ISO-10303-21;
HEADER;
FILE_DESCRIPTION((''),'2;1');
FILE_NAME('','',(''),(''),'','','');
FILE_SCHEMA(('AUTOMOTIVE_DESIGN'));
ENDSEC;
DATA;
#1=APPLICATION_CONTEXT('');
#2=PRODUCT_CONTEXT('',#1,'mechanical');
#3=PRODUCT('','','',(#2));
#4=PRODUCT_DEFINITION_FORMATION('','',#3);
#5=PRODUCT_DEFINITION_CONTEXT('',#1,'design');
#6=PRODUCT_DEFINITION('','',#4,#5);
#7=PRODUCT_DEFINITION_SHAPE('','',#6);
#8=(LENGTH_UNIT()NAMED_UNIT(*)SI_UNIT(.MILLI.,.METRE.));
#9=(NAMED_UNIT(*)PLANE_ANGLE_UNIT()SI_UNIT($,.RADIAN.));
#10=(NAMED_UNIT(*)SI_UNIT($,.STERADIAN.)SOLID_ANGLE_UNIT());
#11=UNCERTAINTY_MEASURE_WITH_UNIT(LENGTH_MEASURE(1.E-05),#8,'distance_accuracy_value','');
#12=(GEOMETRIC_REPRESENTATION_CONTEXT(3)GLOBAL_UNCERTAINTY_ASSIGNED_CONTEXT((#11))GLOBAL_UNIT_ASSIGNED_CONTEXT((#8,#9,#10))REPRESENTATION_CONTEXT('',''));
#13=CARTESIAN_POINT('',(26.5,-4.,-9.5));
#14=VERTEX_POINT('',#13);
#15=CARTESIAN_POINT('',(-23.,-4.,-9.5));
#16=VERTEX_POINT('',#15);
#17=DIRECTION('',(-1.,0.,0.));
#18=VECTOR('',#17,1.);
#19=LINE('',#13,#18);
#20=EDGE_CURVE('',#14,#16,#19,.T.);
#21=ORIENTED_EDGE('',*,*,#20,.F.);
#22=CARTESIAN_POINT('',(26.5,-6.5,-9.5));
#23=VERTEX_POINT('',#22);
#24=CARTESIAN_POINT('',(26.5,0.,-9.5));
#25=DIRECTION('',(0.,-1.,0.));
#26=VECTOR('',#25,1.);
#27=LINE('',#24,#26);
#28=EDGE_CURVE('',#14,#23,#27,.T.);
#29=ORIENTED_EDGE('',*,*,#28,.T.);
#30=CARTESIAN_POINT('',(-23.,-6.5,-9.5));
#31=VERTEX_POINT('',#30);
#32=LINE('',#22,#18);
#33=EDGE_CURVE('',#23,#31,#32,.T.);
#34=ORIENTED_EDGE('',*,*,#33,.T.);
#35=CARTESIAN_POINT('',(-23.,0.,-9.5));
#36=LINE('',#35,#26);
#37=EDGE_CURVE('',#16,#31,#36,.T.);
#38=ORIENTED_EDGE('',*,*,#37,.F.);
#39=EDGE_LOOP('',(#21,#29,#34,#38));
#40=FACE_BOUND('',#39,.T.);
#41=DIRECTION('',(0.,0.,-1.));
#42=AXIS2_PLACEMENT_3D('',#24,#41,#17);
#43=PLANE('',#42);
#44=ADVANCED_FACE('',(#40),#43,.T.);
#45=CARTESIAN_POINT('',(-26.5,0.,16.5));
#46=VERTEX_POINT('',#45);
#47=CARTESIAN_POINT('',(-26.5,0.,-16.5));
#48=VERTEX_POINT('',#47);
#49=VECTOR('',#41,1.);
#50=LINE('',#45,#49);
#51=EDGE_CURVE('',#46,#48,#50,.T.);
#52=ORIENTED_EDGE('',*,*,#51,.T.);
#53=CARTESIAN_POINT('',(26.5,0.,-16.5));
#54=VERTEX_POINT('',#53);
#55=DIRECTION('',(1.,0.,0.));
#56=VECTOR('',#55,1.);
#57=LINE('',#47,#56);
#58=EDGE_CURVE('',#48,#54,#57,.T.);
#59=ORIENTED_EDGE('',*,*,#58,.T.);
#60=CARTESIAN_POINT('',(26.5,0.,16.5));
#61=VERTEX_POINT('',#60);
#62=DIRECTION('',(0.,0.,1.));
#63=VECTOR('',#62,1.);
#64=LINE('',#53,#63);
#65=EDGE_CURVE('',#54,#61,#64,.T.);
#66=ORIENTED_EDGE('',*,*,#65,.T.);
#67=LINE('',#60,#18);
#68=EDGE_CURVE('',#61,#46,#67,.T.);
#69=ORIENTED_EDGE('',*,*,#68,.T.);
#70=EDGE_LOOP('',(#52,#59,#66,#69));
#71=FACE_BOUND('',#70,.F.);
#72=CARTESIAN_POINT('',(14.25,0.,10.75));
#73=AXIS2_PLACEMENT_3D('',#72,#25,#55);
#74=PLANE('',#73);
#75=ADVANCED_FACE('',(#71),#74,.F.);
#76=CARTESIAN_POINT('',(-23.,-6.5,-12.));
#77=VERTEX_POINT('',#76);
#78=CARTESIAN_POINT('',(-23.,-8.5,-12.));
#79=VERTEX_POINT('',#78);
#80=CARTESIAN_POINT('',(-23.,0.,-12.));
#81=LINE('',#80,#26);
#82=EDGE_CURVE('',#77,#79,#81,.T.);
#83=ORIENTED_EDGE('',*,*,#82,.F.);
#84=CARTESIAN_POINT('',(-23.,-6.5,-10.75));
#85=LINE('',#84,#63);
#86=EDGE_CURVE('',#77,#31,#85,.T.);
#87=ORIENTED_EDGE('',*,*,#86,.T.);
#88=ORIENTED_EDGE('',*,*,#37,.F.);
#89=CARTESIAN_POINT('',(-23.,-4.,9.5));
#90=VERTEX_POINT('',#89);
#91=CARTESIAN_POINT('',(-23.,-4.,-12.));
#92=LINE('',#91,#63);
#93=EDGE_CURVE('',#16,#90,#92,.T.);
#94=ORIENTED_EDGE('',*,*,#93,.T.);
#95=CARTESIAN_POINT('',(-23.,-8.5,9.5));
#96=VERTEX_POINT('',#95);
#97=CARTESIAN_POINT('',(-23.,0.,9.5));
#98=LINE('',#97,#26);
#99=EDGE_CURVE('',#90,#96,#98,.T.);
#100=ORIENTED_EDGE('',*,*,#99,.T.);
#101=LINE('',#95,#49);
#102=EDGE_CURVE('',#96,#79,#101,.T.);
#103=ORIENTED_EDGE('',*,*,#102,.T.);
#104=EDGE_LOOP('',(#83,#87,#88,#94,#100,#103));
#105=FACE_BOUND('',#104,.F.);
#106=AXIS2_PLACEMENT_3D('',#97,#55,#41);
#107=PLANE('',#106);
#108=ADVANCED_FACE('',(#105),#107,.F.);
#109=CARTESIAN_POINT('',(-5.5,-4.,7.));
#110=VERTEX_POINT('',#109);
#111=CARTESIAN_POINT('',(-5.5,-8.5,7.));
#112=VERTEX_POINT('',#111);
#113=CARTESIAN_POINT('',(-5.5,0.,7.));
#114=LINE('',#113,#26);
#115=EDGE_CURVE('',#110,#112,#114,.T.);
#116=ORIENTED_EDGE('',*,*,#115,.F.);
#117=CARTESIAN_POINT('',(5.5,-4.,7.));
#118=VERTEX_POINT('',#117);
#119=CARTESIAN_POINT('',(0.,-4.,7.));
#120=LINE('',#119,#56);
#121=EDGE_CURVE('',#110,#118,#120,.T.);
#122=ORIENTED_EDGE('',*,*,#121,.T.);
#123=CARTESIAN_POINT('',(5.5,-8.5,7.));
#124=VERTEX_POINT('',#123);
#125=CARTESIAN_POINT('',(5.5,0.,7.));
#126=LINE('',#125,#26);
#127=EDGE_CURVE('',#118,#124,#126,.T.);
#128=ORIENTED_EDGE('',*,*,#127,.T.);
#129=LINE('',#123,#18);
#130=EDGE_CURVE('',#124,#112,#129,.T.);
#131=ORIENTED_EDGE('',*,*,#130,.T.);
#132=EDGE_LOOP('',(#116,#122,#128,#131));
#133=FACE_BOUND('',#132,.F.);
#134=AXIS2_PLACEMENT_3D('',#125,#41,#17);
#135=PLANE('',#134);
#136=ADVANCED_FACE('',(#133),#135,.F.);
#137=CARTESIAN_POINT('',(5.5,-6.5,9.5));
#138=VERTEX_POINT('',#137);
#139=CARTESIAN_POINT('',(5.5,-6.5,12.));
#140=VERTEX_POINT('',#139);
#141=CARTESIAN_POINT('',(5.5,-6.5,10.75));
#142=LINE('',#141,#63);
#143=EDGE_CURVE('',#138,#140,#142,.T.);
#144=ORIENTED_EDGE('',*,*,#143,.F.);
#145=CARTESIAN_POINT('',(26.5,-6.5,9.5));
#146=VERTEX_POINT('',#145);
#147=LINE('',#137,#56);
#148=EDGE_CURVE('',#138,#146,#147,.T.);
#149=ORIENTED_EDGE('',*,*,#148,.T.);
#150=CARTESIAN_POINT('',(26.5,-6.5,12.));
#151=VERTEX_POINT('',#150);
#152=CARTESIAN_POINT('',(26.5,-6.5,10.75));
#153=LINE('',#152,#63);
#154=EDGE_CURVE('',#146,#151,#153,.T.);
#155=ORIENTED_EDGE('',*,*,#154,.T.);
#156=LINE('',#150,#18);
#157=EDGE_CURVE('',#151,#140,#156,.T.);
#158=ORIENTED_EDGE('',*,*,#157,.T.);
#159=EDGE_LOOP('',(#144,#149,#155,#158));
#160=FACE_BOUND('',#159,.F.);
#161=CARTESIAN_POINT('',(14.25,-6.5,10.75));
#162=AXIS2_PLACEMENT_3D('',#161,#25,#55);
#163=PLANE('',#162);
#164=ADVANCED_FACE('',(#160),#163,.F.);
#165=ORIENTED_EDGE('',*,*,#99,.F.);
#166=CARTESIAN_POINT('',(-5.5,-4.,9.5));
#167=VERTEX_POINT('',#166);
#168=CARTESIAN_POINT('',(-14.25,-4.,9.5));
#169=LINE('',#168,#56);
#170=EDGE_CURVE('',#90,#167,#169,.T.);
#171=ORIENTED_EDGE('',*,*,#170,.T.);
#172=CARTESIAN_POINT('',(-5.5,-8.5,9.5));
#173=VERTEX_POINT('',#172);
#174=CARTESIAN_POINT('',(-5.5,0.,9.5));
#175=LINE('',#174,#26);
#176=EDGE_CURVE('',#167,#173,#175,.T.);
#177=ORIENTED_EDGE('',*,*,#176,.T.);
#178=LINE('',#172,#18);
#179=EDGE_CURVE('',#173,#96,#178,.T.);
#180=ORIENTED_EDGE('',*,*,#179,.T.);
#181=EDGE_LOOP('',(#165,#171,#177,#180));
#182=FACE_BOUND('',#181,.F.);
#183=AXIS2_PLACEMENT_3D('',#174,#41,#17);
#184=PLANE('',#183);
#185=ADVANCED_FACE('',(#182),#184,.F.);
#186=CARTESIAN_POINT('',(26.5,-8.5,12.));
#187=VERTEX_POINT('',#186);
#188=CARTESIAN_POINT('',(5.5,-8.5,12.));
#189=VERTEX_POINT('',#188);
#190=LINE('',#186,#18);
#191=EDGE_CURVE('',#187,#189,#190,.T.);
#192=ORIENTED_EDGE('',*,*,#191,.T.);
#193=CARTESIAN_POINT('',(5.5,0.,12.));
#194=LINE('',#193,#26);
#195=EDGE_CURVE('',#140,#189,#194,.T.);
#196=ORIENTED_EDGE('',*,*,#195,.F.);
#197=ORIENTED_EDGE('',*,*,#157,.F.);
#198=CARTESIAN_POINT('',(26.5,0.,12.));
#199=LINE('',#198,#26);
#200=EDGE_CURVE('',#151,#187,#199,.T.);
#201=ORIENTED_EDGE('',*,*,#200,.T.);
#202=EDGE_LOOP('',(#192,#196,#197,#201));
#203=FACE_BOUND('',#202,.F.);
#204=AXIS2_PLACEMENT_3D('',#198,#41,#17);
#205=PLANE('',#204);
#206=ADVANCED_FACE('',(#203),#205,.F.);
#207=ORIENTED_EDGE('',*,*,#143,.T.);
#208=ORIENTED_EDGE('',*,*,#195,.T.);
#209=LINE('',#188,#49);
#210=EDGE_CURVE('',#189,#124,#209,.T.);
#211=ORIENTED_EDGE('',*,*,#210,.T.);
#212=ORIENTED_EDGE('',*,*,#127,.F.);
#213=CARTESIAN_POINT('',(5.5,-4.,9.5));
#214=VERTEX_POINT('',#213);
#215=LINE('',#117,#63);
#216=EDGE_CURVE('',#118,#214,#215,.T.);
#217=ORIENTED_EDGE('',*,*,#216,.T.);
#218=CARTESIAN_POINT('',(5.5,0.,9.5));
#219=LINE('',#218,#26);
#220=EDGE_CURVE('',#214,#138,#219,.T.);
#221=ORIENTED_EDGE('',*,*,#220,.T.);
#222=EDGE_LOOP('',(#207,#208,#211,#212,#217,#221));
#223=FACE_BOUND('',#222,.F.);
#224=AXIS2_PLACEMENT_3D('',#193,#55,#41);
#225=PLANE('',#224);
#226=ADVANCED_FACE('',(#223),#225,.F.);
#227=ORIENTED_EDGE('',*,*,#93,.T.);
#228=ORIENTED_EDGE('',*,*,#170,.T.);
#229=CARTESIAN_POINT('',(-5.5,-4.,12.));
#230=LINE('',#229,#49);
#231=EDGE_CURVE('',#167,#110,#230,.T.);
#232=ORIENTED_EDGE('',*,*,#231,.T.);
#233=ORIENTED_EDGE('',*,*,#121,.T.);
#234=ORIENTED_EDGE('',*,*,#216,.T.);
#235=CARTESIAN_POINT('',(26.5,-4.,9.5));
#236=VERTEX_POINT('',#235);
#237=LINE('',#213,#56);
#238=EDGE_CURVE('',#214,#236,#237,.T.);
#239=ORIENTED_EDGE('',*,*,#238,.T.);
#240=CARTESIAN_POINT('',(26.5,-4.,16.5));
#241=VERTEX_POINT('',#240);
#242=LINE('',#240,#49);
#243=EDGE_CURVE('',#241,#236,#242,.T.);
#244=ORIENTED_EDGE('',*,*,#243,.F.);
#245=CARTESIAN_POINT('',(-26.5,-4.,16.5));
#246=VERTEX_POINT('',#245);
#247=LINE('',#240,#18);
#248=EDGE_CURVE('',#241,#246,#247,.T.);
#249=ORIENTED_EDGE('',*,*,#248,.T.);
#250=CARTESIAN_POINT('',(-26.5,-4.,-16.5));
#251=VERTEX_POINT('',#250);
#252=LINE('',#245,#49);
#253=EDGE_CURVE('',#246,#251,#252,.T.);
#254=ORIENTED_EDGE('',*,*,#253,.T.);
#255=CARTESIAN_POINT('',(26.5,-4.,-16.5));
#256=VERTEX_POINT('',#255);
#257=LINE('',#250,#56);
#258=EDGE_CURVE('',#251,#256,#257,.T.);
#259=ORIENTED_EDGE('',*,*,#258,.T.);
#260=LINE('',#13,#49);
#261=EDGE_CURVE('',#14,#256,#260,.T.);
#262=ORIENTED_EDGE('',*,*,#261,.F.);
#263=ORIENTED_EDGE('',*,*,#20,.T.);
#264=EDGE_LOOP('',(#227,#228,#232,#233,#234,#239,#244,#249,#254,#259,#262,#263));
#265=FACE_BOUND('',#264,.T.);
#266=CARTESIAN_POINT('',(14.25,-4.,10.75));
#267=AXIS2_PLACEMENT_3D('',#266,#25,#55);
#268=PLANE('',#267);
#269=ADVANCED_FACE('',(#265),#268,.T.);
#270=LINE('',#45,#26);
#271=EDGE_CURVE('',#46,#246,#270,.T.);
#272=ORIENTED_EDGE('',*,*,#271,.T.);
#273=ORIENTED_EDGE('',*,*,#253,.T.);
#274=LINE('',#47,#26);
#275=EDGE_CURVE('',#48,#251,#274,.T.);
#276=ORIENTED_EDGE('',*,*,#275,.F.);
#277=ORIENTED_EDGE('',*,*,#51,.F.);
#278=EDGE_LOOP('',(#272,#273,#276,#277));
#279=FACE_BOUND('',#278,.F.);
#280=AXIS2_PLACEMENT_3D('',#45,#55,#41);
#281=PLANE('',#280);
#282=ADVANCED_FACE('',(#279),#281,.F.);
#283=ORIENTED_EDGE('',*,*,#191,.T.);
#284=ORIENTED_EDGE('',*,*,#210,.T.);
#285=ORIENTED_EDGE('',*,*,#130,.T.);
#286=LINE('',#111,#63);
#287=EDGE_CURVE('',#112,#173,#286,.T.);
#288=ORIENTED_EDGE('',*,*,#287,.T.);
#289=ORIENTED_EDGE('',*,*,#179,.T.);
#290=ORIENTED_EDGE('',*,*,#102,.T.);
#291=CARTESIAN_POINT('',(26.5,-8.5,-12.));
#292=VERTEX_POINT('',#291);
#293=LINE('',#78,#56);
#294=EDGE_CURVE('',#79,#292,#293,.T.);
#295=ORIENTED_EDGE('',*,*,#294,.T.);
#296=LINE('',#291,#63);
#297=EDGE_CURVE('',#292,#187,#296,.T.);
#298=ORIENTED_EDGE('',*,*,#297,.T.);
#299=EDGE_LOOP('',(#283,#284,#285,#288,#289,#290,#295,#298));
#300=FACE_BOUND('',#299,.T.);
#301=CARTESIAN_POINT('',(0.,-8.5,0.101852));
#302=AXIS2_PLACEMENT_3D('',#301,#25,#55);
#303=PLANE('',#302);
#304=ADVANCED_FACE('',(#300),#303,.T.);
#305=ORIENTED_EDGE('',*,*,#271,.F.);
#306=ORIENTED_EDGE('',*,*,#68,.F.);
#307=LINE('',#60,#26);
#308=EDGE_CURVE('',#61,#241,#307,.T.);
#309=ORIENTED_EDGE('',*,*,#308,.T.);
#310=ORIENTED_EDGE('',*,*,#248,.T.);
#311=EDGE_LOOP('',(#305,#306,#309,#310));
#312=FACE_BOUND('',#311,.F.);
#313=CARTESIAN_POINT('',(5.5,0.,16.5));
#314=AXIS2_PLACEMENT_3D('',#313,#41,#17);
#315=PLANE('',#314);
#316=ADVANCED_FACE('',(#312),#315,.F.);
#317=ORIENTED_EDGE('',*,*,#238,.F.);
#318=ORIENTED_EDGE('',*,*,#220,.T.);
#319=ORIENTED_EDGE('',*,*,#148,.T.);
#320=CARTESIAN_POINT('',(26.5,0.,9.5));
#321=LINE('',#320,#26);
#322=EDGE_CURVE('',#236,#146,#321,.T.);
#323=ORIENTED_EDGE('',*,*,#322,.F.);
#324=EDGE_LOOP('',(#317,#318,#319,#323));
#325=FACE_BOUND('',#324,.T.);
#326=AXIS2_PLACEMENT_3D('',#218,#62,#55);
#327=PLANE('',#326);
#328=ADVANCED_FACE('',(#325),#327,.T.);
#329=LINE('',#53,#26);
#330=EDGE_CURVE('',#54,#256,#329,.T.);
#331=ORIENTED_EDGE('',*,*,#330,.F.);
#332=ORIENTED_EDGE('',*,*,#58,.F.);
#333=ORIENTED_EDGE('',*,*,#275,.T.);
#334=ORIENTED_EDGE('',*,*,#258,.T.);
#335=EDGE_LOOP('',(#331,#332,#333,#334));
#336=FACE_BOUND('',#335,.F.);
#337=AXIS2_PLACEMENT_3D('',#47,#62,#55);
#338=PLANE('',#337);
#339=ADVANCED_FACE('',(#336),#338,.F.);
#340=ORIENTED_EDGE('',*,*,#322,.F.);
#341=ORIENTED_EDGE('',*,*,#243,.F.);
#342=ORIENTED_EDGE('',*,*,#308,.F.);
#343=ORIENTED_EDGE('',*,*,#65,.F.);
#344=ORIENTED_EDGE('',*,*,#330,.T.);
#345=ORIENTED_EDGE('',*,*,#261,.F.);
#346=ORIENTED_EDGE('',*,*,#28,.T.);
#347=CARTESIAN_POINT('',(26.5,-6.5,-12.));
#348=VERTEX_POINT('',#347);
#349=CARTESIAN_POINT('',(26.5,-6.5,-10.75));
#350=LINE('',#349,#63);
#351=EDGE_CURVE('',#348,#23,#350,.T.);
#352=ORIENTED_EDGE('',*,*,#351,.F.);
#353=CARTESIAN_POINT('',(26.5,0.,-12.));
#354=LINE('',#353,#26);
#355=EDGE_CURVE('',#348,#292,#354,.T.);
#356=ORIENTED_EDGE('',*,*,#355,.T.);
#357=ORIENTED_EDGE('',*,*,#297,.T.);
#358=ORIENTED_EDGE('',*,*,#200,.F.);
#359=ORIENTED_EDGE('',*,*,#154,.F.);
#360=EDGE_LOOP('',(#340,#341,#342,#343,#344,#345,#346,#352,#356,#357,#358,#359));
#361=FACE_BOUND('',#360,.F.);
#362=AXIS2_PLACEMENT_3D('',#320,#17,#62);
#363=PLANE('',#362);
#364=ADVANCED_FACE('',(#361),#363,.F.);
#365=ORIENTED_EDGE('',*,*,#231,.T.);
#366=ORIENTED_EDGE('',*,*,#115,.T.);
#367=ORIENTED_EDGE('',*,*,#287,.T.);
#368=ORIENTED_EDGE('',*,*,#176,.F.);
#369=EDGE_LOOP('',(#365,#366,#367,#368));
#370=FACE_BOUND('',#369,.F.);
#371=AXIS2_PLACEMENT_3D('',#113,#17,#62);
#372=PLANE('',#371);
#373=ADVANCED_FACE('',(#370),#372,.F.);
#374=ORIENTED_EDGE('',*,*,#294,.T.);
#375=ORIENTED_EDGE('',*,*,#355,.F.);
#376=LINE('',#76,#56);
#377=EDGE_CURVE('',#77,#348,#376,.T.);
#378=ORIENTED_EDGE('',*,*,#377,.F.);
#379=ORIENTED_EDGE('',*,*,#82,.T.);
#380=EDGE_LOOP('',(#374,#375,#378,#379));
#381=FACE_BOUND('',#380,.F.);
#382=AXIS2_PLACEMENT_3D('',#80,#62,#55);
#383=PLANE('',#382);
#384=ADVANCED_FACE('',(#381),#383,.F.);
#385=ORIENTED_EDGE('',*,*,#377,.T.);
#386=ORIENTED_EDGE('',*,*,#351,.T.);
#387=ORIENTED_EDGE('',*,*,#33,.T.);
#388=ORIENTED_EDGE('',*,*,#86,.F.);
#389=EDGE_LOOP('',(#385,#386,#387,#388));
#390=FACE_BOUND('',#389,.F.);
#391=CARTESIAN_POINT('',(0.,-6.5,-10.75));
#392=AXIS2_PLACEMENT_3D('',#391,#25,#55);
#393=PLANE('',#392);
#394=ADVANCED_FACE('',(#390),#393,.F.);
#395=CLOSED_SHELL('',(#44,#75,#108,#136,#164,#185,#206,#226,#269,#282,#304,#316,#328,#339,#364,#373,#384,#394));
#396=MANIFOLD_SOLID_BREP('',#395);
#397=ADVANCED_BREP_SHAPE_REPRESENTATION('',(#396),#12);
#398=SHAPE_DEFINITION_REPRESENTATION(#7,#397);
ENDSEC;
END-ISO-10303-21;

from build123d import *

# Parameters (mm, degrees)
F0_W     = 5.5
F0_H     = 4.5
F0_W_2   = 3.5
F0_H_2   = 2.5
F0_H_3   = 19
F0_W_3   = 11
F1_DEPTH = 4
F0_W_4   = 17.5
F0_W_5   = 46
F2_DEPTH = 8.5
F3_DEPTH = 1
F4_DEPTH = 6.5
F5_DEPTH = 4


with BuildPart() as f1:
    # F0 (on Front) → F1 (new body)
    with BuildSketch(Plane.XZ):
        Polygon((-23, -12), (-26.5, -12), (-26.5, -16.5), (26.5, -16.5), (26.5, -12), (23, -12), align=None)
        with Locations((-2.75, 14.25)):
            Rectangle(F0_W, F0_H)
        with Locations((2.75, 14.25)):
            Rectangle(F0_W, F0_H)
        Polygon((-5.5, 16.5), (-26.5, 16.5), (-26.5, 12), (-23, 12), (-5.5, 12), align=None)
        with Locations((-24.75, 10.75)):
            Rectangle(F0_W_2, F0_H_2)
        with Locations((-24.75, 0)):
            Rectangle(F0_W_2, F0_H_3)
        with Locations((-24.75, -10.75)):
            Rectangle(F0_W_2, F0_H_2)
        Polygon((0, 12), (-5.5, 12), (-5.5, 9.5), (5.5, 9.5), (5.5, 12), align=None)
        with Locations((0, 8.25)):
            Rectangle(F0_W_3, F0_H_2)
        Polygon((26.5, 16.5), (5.5, 16.5), (5.5, 12), (23, 12), (26.5, 12), align=None)
        with Locations((24.75, 10.75)):
            Rectangle(F0_W_2, F0_H_2)
        with Locations((24.75, 0)):
            Rectangle(F0_W_2, F0_H_3)
        with Locations((24.75, -10.75)):
            Rectangle(F0_W_2, F0_H_2)
    extrude(amount=F1_DEPTH)

    # F0 (on Front) → F2 (join)
    with BuildSketch(Plane.XZ):
        Polygon((-5.5, 7), (-5.5, 9.5), (-23, 9.5), (-23, -9.5), (23, -9.5), (23, 9.5), (5.5, 9.5), (5.5, 7), align=None)
        with Locations((14.25, 10.75)):
            Rectangle(F0_W_4, F0_H_2)
        with Locations((0, -10.75)):
            Rectangle(F0_W_5, F0_H_2)
        with Locations((24.75, 10.75)):
            Rectangle(F0_W_2, F0_H_2)
        with Locations((24.75, 0)):
            Rectangle(F0_W_2, F0_H_3)
        with Locations((24.75, -10.75)):
            Rectangle(F0_W_2, F0_H_2)
    extrude(amount=F2_DEPTH)

    # F0 (on Front) → F3 (join)
    with BuildSketch(Plane.XZ):
        with Locations((-2.75, 14.25)):
            Rectangle(F0_W, F0_H)
        with Locations((2.75, 14.25)):
            Rectangle(F0_W, F0_H)
    extrude(amount=F3_DEPTH)

    # F0 (on Front) → F4 (cut)
    with BuildSketch(Plane.XZ):
        with Locations((14.25, 10.75)):
            Rectangle(F0_W_4, F0_H_2)
        with Locations((0, -10.75)):
            Rectangle(F0_W_5, F0_H_2)
        with Locations((24.75, 10.75)):
            Rectangle(F0_W_2, F0_H_2)
        with Locations((24.75, -10.75)):
            Rectangle(F0_W_2, F0_H_2)
    extrude(amount=F4_DEPTH, mode=Mode.SUBTRACT)

    # F0 (on Front) → F5 (join)
    with BuildSketch(Plane.XZ):
        with Locations((14.25, 10.75)):
            Rectangle(F0_W_4, F0_H_2)
        with Locations((-14.25, 10.75)):
            Rectangle(F0_W_4, F0_H_2)
        with Locations((0, -10.75)):
            Rectangle(F0_W_5, F0_H_2)
        with Locations((24.75, 10.75)):
            Rectangle(F0_W_2, F0_H_2)
        with Locations((24.75, -10.75)):
            Rectangle(F0_W_2, F0_H_2)
    extrude(amount=F5_DEPTH)


solid = f1.part
